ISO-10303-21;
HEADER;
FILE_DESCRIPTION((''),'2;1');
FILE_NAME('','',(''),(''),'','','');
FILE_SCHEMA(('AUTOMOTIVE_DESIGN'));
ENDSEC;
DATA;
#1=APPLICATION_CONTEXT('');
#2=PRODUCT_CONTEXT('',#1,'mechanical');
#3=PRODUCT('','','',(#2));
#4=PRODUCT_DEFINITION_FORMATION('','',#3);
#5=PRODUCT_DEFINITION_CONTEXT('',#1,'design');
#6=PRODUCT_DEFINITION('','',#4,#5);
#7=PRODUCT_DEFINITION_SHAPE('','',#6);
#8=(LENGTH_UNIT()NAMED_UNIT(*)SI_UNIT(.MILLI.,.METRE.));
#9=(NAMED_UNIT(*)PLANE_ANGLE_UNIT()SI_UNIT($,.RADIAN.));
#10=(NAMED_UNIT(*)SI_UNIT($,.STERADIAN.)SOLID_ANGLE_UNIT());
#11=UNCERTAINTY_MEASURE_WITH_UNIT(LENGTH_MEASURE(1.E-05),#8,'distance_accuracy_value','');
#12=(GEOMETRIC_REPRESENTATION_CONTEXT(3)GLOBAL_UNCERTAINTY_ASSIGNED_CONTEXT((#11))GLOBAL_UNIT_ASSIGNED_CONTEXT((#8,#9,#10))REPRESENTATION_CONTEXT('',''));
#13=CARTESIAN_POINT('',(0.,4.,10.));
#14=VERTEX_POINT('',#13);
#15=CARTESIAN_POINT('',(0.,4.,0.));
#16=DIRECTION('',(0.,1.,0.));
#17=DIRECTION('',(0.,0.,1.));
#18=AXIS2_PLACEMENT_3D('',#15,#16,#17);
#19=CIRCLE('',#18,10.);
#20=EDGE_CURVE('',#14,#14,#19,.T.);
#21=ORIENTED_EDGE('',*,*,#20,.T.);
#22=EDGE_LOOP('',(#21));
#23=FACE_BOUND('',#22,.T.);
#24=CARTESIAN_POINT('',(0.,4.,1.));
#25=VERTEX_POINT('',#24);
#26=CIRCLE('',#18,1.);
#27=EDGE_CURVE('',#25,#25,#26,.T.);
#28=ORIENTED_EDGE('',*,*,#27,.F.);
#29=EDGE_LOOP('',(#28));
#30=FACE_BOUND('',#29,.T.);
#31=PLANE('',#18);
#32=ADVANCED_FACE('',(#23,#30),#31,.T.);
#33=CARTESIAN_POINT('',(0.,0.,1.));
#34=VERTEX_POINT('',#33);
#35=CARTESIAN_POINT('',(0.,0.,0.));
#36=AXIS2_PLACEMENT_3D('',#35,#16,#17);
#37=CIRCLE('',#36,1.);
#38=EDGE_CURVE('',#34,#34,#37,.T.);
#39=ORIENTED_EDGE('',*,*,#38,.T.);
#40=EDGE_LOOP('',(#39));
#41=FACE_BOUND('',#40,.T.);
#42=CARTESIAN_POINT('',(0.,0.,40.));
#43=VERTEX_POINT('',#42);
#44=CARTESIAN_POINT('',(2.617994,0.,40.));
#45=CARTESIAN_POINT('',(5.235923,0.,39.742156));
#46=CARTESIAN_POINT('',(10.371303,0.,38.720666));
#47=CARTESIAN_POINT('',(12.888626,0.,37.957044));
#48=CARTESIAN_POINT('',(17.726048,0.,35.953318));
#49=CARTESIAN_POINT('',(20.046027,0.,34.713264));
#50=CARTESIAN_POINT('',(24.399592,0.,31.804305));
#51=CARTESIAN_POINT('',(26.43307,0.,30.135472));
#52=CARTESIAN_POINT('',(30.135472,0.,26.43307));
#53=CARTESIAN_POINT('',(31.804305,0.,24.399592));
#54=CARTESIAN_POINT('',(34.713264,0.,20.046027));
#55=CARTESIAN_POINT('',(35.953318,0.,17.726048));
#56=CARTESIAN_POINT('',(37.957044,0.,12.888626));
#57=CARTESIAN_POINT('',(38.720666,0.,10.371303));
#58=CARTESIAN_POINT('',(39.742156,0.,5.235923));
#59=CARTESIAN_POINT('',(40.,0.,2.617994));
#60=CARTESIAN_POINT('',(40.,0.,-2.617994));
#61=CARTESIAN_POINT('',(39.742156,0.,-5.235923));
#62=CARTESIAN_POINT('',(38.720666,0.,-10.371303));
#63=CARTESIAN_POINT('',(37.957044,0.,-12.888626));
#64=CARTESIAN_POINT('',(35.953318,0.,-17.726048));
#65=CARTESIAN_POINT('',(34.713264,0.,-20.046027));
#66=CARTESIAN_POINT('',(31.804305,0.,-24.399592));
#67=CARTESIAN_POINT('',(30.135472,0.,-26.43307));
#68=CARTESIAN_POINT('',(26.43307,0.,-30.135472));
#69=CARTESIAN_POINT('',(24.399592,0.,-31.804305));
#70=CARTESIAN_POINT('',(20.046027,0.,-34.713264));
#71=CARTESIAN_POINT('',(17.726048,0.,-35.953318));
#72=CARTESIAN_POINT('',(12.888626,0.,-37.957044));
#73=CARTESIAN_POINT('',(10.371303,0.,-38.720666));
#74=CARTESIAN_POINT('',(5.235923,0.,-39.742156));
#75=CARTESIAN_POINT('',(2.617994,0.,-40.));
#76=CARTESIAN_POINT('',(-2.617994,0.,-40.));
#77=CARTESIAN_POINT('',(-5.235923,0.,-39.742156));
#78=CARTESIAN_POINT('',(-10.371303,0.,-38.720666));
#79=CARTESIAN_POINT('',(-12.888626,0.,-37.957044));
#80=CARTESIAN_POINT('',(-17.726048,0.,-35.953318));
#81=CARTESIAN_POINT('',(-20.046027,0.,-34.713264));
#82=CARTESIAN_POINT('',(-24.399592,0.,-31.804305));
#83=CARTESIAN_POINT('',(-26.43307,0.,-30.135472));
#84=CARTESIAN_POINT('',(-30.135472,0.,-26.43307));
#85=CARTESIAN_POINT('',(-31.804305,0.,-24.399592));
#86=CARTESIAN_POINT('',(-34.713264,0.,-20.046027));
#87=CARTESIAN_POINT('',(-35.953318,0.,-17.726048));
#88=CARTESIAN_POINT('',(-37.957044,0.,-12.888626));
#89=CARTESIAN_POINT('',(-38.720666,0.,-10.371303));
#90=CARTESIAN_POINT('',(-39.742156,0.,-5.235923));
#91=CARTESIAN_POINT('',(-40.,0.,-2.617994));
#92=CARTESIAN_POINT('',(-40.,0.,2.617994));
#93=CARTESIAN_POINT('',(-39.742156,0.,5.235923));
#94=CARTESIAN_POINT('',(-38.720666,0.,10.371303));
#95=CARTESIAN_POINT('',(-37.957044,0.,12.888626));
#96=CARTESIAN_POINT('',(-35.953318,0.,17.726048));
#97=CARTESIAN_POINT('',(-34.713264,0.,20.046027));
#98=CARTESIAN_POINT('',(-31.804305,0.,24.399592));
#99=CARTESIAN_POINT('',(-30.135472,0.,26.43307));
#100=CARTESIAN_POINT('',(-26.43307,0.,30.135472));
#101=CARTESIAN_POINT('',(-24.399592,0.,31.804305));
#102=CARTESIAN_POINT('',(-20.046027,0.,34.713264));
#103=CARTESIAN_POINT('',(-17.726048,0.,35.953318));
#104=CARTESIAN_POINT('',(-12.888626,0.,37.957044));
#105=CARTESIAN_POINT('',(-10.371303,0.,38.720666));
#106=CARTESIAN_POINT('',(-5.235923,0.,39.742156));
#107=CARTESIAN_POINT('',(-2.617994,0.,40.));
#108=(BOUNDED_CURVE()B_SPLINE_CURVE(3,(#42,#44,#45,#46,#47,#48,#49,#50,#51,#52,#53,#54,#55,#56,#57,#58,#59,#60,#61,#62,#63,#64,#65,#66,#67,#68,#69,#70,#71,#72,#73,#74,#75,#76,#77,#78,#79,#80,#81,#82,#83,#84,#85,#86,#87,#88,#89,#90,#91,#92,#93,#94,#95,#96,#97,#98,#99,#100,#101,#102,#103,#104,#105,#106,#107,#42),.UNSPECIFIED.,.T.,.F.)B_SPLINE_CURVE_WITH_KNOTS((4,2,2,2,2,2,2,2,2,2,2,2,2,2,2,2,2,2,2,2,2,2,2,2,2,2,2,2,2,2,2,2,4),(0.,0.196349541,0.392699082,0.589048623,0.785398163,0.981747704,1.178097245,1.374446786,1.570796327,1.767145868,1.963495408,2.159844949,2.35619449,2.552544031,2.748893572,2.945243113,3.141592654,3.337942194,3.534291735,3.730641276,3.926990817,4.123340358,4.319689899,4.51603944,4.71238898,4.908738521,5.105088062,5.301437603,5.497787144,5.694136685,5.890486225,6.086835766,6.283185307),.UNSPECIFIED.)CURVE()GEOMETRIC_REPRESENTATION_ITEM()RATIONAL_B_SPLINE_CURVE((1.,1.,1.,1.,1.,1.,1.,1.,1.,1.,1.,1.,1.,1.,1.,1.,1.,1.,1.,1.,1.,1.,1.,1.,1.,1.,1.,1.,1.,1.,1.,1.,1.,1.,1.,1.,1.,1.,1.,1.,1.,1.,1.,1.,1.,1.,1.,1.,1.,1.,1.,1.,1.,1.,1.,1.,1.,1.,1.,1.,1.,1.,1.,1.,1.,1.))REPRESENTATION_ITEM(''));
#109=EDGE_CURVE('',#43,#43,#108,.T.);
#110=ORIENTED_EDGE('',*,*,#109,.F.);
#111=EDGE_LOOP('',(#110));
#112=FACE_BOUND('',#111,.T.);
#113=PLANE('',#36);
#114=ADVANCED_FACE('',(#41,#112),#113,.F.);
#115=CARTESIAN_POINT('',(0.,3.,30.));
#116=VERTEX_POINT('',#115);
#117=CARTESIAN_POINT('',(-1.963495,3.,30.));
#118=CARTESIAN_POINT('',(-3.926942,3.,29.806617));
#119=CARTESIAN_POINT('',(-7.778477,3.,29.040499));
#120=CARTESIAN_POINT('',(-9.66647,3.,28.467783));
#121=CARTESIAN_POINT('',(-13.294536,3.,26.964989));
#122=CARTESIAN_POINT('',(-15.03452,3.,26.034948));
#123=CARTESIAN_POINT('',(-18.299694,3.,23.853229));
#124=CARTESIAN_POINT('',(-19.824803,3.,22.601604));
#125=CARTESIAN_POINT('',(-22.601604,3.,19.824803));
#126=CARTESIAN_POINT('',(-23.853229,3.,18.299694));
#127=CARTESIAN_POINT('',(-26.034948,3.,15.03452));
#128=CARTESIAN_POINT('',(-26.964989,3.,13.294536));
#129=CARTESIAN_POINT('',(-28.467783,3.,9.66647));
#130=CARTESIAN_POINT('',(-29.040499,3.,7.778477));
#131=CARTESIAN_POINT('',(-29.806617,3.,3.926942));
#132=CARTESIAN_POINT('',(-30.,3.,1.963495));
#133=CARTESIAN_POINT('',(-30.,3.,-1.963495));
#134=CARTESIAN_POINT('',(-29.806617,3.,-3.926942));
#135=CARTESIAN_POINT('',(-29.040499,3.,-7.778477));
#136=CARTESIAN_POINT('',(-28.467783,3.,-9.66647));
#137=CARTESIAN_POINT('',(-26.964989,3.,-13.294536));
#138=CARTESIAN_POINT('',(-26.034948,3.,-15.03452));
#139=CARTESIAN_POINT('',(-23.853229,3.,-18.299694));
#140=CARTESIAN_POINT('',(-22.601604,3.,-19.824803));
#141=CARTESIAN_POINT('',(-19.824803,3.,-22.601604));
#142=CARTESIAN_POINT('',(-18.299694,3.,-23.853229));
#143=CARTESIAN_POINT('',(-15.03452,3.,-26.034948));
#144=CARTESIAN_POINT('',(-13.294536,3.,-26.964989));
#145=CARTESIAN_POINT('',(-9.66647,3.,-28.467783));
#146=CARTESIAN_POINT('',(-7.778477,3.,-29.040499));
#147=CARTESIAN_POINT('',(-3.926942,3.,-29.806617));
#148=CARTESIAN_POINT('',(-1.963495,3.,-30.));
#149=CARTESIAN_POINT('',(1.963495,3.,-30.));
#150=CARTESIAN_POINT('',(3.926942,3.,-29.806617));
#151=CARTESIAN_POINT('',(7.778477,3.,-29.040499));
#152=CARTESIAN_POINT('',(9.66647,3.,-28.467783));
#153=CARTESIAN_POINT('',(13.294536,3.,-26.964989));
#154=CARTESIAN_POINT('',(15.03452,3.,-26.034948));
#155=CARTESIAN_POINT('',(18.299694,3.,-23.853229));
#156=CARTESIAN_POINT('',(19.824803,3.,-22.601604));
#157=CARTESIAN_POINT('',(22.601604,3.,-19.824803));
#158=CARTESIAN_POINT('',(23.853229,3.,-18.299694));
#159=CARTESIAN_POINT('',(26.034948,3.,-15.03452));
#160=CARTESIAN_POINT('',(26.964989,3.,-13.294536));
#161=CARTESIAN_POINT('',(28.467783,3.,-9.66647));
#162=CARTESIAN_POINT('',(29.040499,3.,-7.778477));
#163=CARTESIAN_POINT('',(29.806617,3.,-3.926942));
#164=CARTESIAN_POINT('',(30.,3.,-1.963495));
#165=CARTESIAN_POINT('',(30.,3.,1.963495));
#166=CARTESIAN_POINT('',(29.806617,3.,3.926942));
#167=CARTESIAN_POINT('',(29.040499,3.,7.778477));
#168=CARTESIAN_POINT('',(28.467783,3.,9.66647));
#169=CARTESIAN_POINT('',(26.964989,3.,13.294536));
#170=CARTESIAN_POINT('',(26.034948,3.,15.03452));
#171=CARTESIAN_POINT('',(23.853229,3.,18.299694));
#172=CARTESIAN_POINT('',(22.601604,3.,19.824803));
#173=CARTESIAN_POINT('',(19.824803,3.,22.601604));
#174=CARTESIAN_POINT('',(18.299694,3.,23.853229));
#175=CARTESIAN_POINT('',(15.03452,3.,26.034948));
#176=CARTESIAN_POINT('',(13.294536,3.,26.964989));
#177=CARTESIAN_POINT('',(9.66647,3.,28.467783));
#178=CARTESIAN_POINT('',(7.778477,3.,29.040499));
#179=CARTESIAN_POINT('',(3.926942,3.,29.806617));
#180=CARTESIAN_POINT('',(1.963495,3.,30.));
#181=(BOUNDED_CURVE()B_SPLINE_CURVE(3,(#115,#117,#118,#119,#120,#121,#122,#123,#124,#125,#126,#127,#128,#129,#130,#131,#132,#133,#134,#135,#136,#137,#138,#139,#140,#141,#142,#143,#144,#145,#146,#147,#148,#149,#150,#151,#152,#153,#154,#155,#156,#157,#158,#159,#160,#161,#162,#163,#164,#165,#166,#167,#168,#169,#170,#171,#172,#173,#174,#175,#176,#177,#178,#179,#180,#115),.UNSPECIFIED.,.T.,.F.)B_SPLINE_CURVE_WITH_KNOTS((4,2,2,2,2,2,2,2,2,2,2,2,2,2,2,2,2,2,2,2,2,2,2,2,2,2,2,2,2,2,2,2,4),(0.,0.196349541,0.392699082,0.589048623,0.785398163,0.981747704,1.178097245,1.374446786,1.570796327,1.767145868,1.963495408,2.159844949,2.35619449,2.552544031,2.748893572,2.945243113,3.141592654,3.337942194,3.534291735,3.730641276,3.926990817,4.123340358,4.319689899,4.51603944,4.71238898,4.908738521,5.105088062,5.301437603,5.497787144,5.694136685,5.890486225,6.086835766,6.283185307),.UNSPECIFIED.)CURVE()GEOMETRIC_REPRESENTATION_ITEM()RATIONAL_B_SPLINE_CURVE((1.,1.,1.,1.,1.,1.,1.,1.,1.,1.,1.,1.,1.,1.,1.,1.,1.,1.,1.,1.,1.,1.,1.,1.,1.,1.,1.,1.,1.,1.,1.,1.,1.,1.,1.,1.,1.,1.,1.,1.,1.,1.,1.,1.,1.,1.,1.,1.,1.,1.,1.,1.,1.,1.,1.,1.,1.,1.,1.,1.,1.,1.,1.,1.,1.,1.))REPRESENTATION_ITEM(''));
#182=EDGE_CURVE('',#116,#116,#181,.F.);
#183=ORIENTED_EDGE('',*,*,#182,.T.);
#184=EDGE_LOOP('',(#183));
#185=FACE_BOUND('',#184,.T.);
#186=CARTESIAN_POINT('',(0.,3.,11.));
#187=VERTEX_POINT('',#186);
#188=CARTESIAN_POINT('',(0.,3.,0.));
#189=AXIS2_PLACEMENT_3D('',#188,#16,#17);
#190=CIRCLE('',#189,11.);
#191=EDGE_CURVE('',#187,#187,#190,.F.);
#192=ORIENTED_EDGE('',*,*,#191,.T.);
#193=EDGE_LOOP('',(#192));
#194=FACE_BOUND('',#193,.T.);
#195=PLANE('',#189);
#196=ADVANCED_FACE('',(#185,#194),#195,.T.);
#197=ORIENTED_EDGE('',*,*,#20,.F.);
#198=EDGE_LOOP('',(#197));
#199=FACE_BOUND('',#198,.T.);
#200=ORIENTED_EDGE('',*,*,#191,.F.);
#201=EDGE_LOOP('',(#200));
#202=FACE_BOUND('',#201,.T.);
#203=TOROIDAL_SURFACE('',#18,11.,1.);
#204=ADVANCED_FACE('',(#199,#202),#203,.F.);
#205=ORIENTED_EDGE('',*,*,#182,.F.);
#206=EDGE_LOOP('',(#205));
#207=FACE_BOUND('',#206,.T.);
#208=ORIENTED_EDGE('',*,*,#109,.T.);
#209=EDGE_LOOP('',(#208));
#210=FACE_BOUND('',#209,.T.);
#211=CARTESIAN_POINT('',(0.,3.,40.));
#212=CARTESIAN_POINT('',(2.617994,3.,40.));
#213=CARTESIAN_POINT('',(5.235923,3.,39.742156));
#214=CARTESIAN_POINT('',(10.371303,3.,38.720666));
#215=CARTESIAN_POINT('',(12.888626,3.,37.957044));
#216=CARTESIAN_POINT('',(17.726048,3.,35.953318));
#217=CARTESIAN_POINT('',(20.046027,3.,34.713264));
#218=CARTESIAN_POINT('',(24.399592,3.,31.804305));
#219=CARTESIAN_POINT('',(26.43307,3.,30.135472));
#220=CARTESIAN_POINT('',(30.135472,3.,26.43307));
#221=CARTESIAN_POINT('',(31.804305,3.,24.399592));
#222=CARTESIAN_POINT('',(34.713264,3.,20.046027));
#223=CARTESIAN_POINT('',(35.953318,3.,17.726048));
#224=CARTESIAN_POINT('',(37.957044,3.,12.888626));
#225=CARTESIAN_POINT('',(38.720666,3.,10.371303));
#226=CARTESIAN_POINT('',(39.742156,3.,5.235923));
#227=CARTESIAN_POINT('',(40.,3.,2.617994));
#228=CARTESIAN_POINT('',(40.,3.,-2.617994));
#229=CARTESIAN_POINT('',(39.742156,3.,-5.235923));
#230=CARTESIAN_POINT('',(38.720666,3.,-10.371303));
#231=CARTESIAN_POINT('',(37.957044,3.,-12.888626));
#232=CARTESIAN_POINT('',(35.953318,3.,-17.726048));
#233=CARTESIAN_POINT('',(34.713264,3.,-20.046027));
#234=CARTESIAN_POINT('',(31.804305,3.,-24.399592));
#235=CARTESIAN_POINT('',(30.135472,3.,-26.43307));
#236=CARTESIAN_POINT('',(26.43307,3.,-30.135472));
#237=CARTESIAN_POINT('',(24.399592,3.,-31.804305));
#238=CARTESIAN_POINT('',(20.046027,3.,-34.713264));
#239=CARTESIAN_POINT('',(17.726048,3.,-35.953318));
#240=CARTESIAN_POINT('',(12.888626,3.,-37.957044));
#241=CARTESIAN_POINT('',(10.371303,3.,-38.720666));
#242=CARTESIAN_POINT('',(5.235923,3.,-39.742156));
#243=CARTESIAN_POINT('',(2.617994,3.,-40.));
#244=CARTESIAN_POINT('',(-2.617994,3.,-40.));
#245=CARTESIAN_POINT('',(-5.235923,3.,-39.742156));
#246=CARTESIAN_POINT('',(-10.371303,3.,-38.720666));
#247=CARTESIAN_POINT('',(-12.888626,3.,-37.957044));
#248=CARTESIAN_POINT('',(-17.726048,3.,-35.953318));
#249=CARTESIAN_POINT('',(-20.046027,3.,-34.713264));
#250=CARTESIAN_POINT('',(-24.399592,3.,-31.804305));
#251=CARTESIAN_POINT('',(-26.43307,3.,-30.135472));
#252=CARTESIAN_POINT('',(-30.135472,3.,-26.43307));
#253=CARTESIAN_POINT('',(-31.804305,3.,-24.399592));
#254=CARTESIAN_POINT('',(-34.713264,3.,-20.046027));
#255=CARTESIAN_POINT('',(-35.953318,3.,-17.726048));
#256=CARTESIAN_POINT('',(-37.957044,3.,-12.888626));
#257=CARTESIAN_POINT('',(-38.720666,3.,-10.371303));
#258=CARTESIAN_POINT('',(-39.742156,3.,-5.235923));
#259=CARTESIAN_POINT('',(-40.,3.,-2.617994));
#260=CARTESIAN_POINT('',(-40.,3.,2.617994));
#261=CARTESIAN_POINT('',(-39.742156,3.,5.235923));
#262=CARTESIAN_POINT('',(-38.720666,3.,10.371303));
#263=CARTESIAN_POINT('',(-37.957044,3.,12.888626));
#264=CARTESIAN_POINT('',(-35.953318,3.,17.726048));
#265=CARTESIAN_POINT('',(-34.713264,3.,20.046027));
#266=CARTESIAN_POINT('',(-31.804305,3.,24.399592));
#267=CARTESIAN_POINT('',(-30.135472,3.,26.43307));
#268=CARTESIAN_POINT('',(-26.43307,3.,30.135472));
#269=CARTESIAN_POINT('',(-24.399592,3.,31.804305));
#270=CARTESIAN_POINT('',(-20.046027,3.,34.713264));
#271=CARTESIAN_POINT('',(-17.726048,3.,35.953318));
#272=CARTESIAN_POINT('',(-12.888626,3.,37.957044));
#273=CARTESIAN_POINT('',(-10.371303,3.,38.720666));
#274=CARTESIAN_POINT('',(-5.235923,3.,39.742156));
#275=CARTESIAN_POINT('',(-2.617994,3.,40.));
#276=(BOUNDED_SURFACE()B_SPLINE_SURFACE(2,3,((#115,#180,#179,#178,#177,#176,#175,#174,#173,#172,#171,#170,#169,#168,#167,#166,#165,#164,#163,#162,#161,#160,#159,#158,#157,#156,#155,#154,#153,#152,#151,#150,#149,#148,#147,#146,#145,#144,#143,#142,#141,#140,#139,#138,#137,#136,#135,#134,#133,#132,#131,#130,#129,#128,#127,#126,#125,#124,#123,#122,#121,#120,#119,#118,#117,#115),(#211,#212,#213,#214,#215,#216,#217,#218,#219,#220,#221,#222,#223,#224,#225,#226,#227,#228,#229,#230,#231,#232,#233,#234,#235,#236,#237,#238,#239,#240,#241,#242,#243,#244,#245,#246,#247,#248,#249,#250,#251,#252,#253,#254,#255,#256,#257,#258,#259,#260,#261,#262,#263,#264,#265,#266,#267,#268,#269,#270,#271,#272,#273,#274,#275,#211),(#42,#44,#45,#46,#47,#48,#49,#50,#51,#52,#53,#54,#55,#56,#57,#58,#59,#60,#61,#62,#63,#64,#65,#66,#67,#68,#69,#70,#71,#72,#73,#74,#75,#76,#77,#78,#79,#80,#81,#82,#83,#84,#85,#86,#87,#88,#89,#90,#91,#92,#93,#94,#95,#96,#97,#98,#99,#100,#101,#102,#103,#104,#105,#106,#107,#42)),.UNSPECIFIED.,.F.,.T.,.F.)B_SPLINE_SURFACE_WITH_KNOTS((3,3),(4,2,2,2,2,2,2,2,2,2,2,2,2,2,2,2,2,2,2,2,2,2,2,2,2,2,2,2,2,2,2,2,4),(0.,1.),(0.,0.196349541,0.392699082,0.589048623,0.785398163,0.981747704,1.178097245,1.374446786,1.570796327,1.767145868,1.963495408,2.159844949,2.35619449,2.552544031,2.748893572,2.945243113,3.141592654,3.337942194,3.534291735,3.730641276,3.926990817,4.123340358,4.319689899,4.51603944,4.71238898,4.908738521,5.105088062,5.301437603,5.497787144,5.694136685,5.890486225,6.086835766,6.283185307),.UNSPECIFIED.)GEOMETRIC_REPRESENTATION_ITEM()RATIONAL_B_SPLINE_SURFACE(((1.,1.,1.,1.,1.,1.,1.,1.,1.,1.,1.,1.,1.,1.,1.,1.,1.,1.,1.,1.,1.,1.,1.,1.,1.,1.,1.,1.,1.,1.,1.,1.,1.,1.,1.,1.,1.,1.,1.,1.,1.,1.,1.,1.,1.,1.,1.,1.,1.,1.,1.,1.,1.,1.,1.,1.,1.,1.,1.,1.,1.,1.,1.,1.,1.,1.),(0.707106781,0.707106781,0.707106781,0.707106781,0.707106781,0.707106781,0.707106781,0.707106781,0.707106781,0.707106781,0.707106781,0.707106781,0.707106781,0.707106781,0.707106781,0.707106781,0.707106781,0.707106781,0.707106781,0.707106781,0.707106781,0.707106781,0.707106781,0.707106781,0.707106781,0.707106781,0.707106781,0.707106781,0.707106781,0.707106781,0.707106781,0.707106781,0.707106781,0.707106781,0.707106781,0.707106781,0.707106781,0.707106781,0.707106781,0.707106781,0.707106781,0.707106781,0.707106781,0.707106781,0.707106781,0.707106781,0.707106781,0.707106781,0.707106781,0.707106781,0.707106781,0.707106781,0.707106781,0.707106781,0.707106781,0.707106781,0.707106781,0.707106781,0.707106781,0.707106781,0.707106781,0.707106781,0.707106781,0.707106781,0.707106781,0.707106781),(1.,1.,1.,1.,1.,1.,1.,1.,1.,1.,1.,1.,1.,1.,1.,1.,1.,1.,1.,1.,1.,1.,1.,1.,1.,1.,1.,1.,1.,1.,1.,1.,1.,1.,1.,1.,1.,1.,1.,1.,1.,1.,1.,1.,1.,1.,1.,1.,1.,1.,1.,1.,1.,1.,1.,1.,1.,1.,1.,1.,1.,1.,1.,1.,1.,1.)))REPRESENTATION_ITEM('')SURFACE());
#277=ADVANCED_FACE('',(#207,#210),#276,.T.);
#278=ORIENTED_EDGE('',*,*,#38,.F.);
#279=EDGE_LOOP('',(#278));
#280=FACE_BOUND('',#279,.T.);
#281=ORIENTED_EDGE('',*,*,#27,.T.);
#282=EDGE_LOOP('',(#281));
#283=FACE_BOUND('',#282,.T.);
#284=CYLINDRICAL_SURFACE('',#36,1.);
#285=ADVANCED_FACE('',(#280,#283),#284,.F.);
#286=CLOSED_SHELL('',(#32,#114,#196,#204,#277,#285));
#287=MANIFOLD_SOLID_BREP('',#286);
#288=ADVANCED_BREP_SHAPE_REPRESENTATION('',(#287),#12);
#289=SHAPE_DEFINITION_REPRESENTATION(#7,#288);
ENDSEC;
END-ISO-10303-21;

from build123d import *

# Parameters (mm, degrees)
SKETCH1_R           = 40
BOSS_EXTRUDE1_DEPTH = 3
SKETCH2_R           = 10
BOSS_EXTRUDE2_DEPTH = 1
SKETCH3_R           = 1
CUT_EXTRUDE1_DEPTH  = 57.709787515
FILLET1_R           = 1
FILLET2_SIZE        = 10
FILLET2_SIZE_2      = 3


# Some blends are built 0.0001 mm under size
with BuildPart() as part:
    # Sketch1 → Boss-Extrude1 (new body)
    with BuildSketch(Plane(origin=(0, 0, 0), x_dir=(1, 0, 0), z_dir=(0, 1, 0))):
        with Locations(Location((0, 0, 0), (0, 0, 270))):
            Circle(SKETCH1_R)
    extrude(amount=BOSS_EXTRUDE1_DEPTH)

    # Sketch2 → Boss-Extrude2 (add)
    with BuildSketch(Plane(origin=(0, 3, 0), x_dir=(1, 0, 0), z_dir=(0, 1, 0))):
        with Locations(Location((0, 0, 0), (0, 0, 270))):
            Circle(SKETCH2_R)
    extrude(amount=BOSS_EXTRUDE2_DEPTH)

    # Sketch3 → Cut-Extrude1 (cut, through all)
    with BuildSketch(Plane(origin=(0, 4, 0), x_dir=(1, 0, 0), z_dir=(0, 1, 0))):
        with Locations(Location((0, 0, 0), (0, 0, 270))):
            Circle(SKETCH3_R)
    extrude(amount=-CUT_EXTRUDE1_DEPTH, mode=Mode.SUBTRACT)

    # Fillet1
    fillet1_edges = [part.edges().sort_by_distance(p)[0] for p in [
        (0, 3, -10),
    ]]
    fillet(fillet1_edges, radius=FILLET1_R - 0.0001)  # a hair under: the kernel refuses the full size

    # Fillet2
    # an asymmetric fillet: 10, 3 mm, written as the material it takes off along each edge
    with BuildSketch(Plane(origin=(0, 3, 0), x_dir=(0, 0, 1), z_dir=(-1, 0, 0))) as fillet2_piece_1:
        with BuildLine():
            Bezier((40 - FILLET2_SIZE, 0), (40, 0), (40, -FILLET2_SIZE_2), weights=[1, 0.707106781, 1])
            Line((40, -FILLET2_SIZE_2), (40, 0))
            Line((40, 0), (40 - FILLET2_SIZE, 0))
        make_face()
    revolve(axis=Axis((0, 3, 0), (0, 1, 0)), mode=Mode.SUBTRACT)


solid = part.part
